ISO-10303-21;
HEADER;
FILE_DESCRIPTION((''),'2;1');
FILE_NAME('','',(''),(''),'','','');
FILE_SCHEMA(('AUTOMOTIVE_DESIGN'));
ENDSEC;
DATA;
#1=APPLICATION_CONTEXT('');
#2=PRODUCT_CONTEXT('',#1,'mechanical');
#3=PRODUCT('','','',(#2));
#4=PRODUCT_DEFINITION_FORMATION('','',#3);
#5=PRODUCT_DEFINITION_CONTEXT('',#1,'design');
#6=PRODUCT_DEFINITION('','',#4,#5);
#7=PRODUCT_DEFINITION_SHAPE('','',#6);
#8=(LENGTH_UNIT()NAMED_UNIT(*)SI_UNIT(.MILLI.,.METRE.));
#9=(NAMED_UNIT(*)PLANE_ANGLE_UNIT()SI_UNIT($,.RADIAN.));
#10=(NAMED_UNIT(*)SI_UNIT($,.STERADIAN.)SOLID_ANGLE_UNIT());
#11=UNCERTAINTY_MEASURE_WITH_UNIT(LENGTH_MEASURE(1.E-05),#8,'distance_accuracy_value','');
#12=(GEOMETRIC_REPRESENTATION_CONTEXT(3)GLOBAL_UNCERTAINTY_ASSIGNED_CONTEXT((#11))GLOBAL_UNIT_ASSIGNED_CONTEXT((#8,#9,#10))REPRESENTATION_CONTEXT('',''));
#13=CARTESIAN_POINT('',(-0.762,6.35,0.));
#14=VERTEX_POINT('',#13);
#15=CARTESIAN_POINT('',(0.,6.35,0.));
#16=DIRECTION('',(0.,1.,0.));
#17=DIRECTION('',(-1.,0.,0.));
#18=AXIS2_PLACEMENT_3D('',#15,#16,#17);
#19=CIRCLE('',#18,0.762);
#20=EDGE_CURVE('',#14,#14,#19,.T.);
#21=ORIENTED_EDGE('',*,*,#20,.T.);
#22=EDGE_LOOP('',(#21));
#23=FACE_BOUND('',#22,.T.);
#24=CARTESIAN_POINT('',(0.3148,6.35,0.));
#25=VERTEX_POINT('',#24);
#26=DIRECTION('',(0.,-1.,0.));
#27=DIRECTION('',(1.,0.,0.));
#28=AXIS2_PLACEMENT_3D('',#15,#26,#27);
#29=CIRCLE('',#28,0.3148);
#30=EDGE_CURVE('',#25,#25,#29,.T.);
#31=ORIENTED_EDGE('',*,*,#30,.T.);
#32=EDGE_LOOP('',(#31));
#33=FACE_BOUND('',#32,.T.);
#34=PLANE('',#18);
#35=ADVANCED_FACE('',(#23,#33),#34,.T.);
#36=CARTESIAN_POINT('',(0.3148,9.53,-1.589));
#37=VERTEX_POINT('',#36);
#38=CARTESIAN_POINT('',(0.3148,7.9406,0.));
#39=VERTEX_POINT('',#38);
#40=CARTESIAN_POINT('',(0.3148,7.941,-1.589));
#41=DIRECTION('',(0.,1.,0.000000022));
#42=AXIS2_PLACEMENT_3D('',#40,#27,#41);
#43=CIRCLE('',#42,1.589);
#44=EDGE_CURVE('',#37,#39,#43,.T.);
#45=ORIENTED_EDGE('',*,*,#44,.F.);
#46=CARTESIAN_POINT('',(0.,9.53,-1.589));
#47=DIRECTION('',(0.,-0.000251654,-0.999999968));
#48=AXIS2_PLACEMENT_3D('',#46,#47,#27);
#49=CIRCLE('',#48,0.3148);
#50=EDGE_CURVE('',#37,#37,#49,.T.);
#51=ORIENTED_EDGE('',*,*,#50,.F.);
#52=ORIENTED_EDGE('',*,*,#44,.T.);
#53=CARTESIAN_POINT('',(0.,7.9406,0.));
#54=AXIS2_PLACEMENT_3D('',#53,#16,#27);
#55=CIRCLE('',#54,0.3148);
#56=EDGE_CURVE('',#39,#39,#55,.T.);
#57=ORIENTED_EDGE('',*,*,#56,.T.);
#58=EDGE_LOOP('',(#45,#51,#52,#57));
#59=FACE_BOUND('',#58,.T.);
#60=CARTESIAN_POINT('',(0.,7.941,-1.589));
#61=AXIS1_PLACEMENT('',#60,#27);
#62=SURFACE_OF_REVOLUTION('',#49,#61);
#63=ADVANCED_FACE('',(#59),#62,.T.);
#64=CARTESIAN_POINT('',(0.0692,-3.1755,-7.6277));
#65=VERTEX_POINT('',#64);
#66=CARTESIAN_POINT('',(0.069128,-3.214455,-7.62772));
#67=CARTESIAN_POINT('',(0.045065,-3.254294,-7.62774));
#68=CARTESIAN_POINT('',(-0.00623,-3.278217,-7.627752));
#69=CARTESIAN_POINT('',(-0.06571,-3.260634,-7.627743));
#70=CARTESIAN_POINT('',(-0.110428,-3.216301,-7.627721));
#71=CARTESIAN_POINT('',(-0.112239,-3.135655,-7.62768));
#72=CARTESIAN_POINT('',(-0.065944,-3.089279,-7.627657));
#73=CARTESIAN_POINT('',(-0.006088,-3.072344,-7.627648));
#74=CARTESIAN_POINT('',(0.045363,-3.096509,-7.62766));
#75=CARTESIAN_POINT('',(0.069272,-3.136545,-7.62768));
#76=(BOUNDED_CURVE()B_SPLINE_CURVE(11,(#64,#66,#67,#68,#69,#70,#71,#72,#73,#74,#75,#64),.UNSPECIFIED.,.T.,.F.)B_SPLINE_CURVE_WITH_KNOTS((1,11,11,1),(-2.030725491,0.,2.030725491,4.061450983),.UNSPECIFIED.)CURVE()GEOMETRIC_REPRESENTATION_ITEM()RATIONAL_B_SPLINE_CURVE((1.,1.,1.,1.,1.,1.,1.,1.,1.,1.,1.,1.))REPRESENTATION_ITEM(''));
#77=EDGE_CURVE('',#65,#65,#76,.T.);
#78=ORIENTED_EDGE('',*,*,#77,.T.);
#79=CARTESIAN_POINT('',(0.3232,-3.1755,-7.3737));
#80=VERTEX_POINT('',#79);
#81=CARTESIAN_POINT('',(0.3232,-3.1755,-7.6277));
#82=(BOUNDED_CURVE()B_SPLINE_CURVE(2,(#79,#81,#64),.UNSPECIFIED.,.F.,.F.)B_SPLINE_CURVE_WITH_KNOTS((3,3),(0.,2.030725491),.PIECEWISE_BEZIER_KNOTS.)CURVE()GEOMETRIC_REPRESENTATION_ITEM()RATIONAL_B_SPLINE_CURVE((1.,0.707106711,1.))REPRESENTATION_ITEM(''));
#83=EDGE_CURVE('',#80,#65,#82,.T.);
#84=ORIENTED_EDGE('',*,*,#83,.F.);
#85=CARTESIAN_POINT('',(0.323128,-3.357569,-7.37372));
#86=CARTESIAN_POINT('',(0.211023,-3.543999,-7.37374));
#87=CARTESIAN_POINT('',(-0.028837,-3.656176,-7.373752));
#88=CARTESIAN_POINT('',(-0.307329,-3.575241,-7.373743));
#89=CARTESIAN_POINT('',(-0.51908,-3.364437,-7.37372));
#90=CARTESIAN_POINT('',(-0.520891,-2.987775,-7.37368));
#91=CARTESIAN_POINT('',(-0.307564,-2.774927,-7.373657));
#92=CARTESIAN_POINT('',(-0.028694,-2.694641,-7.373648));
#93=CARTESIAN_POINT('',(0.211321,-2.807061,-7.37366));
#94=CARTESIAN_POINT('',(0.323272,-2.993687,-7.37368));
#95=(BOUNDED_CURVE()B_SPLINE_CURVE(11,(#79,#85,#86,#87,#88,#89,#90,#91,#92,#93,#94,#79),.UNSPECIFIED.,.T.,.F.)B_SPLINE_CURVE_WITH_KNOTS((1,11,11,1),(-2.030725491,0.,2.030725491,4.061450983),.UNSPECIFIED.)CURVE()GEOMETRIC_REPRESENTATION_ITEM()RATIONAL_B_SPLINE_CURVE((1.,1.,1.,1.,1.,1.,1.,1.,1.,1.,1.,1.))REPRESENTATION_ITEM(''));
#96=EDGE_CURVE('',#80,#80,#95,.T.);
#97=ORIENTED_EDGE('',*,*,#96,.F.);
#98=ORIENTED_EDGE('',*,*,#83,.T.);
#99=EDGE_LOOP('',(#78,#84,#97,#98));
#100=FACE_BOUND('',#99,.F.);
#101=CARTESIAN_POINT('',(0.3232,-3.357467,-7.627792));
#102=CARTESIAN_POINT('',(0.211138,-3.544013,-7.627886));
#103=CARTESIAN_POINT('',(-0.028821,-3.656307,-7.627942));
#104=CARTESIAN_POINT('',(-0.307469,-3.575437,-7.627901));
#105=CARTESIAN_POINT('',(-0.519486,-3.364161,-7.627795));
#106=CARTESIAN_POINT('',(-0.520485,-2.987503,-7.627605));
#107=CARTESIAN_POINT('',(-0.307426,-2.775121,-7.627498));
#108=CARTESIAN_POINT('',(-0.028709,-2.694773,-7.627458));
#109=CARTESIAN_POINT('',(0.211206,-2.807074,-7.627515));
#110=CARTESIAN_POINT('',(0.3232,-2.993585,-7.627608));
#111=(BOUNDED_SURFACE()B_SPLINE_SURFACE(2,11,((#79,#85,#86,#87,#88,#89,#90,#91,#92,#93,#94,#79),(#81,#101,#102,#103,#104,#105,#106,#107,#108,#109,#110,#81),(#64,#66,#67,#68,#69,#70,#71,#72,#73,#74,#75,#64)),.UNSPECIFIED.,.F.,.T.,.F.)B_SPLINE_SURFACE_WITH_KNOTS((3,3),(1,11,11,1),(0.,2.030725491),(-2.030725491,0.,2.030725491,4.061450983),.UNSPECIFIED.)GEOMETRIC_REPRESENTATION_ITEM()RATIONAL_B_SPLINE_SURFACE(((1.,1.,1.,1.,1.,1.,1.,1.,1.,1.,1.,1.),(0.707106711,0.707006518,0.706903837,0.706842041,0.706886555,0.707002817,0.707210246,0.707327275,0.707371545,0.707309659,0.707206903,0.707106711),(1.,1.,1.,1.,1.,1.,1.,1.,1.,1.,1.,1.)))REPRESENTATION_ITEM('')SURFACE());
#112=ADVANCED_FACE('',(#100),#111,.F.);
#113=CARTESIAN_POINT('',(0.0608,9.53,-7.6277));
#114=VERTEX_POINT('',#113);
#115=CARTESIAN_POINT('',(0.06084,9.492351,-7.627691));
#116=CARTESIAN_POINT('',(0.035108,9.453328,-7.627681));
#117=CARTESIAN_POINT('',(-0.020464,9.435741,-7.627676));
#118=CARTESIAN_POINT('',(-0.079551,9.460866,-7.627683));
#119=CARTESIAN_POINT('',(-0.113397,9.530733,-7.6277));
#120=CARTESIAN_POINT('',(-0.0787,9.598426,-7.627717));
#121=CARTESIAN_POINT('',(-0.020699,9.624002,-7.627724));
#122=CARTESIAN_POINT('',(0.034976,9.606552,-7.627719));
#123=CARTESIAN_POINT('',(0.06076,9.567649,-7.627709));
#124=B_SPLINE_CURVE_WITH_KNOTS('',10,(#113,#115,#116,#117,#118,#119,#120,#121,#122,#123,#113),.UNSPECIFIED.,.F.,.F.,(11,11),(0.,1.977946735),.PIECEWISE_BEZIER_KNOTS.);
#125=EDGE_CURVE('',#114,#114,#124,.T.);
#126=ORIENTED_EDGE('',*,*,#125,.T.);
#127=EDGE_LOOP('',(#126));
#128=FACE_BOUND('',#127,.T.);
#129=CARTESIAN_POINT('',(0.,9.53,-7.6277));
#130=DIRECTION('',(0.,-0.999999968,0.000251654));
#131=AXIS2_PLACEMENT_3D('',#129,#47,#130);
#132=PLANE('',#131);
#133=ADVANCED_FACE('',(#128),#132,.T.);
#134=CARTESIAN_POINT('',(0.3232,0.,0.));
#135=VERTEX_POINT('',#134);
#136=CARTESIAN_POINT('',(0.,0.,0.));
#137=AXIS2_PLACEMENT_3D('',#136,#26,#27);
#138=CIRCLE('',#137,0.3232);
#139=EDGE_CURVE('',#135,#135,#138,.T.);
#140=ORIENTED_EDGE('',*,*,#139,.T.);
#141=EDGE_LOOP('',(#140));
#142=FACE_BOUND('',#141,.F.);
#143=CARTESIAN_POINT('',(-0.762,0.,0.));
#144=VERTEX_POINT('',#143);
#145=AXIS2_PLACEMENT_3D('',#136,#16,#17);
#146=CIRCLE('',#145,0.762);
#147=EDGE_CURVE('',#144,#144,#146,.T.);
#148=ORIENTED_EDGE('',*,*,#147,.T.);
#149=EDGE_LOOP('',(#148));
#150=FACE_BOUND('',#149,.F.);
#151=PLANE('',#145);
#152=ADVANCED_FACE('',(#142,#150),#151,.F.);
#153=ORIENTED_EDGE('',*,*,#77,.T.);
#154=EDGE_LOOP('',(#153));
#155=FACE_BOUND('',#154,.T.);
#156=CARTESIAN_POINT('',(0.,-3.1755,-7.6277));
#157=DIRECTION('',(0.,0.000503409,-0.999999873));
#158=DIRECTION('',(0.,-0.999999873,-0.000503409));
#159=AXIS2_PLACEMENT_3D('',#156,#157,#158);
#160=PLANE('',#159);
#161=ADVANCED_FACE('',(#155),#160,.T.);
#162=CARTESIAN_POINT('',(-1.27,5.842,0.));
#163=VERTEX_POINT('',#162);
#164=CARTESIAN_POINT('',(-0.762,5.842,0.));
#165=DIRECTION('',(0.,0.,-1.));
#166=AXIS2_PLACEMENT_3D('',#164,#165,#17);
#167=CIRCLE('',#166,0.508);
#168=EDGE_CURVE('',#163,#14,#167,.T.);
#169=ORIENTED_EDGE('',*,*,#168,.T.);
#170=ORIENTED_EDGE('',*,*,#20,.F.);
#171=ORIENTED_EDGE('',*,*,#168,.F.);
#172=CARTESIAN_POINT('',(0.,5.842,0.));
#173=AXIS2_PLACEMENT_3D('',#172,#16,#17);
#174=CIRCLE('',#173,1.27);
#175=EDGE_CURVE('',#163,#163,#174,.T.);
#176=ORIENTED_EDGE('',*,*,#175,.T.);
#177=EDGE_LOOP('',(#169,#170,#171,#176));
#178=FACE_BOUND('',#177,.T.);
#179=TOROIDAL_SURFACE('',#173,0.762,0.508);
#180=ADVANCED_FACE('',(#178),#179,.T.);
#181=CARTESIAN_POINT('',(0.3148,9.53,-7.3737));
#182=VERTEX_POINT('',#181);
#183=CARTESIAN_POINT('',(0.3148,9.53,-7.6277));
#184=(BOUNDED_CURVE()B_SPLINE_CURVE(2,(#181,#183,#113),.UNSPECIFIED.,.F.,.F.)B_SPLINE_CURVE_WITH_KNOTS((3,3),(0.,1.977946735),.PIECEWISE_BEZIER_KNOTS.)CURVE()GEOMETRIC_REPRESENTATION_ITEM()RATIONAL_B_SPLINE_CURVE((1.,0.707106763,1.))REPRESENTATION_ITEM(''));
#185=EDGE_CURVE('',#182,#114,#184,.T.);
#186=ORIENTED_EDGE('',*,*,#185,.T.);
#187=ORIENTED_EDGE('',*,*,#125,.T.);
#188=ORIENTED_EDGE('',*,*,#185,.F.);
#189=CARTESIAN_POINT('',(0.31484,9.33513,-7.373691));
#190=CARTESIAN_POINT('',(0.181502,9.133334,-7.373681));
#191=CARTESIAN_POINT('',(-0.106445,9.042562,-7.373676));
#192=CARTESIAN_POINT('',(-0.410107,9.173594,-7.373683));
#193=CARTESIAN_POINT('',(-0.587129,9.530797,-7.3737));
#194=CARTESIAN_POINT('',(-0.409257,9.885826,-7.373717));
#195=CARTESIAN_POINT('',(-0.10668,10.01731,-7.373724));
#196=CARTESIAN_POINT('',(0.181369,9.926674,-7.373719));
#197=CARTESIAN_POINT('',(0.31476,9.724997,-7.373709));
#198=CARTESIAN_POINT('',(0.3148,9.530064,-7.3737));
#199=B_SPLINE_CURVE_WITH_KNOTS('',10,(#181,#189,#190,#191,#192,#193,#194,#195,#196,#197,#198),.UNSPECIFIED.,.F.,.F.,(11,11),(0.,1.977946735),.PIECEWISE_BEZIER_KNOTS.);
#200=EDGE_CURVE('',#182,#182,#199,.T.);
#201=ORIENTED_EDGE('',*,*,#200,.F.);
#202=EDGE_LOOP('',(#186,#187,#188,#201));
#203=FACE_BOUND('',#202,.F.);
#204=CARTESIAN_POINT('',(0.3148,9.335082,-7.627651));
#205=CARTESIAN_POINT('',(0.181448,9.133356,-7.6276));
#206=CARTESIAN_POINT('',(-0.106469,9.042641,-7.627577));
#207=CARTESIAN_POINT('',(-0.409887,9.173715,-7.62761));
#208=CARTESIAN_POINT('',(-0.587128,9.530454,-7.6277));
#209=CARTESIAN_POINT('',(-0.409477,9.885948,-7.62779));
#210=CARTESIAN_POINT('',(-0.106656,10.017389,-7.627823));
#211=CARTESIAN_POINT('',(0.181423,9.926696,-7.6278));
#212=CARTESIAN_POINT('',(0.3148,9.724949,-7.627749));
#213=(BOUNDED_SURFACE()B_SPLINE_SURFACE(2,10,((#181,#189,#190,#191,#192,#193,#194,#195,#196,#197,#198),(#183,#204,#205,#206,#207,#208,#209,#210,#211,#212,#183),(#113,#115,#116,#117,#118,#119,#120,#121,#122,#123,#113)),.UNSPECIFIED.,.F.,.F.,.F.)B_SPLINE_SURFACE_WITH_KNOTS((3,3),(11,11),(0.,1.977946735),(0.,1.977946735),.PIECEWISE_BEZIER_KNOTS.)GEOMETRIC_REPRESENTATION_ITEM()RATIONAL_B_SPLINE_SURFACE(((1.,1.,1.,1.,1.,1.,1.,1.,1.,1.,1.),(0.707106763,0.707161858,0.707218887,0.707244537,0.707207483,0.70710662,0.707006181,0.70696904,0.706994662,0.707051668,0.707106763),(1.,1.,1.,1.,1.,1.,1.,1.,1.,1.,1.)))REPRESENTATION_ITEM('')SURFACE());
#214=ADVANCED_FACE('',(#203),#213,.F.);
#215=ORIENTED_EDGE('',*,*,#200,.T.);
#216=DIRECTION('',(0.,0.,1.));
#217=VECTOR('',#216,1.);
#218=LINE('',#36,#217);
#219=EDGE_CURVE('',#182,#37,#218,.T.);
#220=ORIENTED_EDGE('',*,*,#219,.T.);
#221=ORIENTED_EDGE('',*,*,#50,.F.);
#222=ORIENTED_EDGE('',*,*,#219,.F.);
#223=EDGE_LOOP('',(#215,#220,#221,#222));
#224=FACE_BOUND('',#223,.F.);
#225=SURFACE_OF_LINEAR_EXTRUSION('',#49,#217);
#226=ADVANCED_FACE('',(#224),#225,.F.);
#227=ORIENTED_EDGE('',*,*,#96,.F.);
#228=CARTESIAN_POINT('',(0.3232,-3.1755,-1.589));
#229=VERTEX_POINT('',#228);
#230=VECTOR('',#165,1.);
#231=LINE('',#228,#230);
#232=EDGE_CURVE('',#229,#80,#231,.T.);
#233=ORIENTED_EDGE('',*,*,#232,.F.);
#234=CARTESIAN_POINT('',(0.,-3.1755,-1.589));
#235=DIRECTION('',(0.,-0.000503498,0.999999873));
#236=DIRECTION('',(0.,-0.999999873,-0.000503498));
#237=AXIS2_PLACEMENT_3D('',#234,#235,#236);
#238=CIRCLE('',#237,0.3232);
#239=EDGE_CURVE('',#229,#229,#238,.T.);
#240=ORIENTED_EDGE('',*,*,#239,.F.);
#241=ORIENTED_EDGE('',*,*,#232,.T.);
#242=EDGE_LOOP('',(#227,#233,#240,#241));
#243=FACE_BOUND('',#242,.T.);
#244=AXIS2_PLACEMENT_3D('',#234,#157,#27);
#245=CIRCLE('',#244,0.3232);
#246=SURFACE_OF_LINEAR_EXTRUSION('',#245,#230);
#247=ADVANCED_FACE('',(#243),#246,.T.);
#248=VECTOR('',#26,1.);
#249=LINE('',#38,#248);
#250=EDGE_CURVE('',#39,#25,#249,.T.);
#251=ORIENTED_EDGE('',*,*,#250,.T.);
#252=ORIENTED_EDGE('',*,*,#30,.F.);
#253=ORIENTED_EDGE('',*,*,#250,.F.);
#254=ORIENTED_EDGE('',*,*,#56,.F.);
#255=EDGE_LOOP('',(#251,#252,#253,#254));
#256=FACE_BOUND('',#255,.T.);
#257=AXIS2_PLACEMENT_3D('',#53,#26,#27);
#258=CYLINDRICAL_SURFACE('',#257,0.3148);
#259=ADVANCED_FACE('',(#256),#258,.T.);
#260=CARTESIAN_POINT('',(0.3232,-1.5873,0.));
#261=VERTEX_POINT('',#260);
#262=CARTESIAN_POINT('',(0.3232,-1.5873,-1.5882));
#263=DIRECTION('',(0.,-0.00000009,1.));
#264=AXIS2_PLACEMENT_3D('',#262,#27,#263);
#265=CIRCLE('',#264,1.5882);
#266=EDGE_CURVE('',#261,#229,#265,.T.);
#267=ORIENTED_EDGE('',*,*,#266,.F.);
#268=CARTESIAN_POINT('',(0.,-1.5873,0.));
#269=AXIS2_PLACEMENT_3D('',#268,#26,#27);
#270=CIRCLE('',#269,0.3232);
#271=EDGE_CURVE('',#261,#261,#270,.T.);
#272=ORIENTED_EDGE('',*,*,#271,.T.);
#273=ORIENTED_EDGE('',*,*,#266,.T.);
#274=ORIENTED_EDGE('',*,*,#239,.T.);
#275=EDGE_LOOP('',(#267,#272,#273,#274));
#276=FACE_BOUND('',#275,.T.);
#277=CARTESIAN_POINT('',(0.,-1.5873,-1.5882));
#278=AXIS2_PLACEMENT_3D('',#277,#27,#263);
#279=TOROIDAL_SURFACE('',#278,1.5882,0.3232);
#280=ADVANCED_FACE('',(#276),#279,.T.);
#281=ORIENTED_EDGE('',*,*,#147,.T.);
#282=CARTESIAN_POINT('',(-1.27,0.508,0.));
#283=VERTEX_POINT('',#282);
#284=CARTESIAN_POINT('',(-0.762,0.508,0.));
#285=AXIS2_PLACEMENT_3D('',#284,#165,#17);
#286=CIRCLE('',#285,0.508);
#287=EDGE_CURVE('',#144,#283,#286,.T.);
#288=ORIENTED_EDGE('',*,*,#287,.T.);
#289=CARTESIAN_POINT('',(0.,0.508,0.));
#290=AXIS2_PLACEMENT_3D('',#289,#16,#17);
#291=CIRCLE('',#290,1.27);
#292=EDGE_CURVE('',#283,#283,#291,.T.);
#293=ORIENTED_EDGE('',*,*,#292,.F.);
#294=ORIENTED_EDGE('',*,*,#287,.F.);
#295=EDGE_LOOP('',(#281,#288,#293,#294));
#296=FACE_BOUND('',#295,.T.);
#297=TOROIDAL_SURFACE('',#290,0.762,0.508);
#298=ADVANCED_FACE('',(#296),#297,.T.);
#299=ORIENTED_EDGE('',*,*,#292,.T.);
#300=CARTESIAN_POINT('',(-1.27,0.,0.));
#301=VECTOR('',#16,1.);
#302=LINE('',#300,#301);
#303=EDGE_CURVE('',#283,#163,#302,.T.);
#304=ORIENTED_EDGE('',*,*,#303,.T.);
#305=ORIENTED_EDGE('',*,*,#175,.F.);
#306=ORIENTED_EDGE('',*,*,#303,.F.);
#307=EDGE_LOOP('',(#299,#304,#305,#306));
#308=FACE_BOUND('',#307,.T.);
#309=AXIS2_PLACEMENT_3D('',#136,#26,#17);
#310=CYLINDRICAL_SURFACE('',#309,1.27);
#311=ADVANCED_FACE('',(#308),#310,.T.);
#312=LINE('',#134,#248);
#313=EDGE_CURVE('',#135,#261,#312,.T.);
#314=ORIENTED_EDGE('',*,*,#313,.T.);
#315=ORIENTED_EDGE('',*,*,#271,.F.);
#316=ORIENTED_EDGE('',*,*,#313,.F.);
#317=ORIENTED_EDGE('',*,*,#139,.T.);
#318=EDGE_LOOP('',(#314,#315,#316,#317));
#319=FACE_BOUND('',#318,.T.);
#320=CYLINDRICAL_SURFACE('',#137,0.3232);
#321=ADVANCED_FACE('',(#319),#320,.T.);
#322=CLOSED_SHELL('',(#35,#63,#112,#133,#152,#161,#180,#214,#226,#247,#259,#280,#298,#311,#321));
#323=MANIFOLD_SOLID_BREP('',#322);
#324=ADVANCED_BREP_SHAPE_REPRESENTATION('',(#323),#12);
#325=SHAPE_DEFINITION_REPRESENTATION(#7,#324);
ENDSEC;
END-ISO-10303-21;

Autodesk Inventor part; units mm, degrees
ref_plane "YZ Plane" through (0, 0, 0) normal (1, 0, 0) x (0, 1, 0)
ref_plane "XY Plane" through (0, 0, 0) normal (0, 0, 1) x (1, 0, 0)
sketch "Náčrt1" plane through (0, 0, 0) normal (0, 1, 0) x (-1, 0, 0)
  circle A0 centre (0, 0) radius 1.27
  dimension "d0" = 2.54
extrude "Vysunutí1" add sketch "Náčrt1" along normal blind 6.35
sketch "Náčrt2" plane through (0, 0, 0) normal (1, 0, 0) x (0, 1, 0)
  point P0 (0, 0)
sketch "Náčrt3" plane through (0, 0, 0) normal (1, 0, 0) x (0, 1, 0)
  line L0 (0, 1.27) -> (0, -1.27) projected
  line L1 (6.35, -1.27) -> (6.35, 1.27) projected
  line L2 (0, 1.27) -> (6.35, 1.27)
  line L3 (0, 0) -> (-1.5873, 0)
  arc A0 (-1.5873, 0) -> (-3.1755, -1.589) centre (-1.5873, -1.5882) ccw
  arc A1 (9.53, -1.589) -> (7.9406, 0) centre (7.941, -1.589) ccw
  line L4 (9.53, -1.589) -> (9.53, -7.6277)
  line L5 (-3.1755, -1.589) -> (-3.1755, -7.6277)
  line L6 (7.9406, 0) -> (6.35, 0)
  point P0 (3.175, 1.27)
  point P1 (-3.1747, -3.1763)
  point P2 (9.5308, -3.1763)
  point P3 (0, -3.1763)
  point P4 (6.3512, -3.178)
sketch "Náčrt4" plane through (0, 0, 0) normal (0, -1, 0) x (1, 0, 0)
  circle A0 centre (0, 0) radius 1.27 projected
  circle A1 centre (0, 0) radius 0.3232
sketch "Náčrt5" plane through (0, 6.35, 0) normal (0, 1, 0) x (1, 0, 0)
  circle A0 centre (0, 0) radius 1.27 projected
  circle A1 centre (0, 0) radius 0.3148
sweep "Tažení1" add profiles "Náčrt4" path "Náčrt3" path curves L3 A0 L5 contours A1
sweep "Tažení2" add profiles "Náčrt5" path "Náčrt3" path curves L6 A1 L4 contours A1
fillet "Zaoblení1" radius 0.254 2 edges at (-0.3232, -3.1755, -7.6277) (-0.3148, 9.53, -7.6277)
fillet "Zaoblení2" radius 0.508 2 edges at (1.27, 0, 0) (1.27, 6.35, 0)
ref_plane "Pracovní rovina8" through (0, 4.445, 0) normal (0, 1, 0) x (-1, 0, 0)
ref_plane "Pracovní rovina7" through (0, 3.81, 0) normal (0, 1, 0) x (-1, 0, 0)
ref_plane "Pracovní rovina9" through (0, 4.826, 0) normal (0, 1, 0) x (-1, 0, 0)
split_face "Rozdělit1"
split_face "Rozdělit2"
split_face "Rozdělit3"
split_face "Rozdělit4"
split_face "Rozdělit5"
split_face "Rozdělit6"
split_face "Rozdělit7"
split_face "Rozdělit8"
split_face "Rozdělit9"
ref_plane "Pracovní rovina1" through (0, 0.762, 0) normal (0, 1, 0) x (-1, 0, 0)
ref_plane "Pracovní rovina2" through (0, 1.397, 0) normal (0, 1, 0) x (-1, 0, 0)
ref_plane "Pracovní rovina3" through (0, 1.778, 0) normal (0, 1, 0) x (-1, 0, 0)
ref_plane "Pracovní rovina4" through (0, 2.413, 0) normal (0, 1, 0) x (-1, 0, 0)
ref_plane "Pracovní rovina5" through (0, 2.794, 0) normal (0, 1, 0) x (-1, 0, 0)
ref_plane "Pracovní rovina6" through (0, 3.429, 0) normal (0, 1, 0) x (-1, 0, 0)
properties part number "Resistor"
